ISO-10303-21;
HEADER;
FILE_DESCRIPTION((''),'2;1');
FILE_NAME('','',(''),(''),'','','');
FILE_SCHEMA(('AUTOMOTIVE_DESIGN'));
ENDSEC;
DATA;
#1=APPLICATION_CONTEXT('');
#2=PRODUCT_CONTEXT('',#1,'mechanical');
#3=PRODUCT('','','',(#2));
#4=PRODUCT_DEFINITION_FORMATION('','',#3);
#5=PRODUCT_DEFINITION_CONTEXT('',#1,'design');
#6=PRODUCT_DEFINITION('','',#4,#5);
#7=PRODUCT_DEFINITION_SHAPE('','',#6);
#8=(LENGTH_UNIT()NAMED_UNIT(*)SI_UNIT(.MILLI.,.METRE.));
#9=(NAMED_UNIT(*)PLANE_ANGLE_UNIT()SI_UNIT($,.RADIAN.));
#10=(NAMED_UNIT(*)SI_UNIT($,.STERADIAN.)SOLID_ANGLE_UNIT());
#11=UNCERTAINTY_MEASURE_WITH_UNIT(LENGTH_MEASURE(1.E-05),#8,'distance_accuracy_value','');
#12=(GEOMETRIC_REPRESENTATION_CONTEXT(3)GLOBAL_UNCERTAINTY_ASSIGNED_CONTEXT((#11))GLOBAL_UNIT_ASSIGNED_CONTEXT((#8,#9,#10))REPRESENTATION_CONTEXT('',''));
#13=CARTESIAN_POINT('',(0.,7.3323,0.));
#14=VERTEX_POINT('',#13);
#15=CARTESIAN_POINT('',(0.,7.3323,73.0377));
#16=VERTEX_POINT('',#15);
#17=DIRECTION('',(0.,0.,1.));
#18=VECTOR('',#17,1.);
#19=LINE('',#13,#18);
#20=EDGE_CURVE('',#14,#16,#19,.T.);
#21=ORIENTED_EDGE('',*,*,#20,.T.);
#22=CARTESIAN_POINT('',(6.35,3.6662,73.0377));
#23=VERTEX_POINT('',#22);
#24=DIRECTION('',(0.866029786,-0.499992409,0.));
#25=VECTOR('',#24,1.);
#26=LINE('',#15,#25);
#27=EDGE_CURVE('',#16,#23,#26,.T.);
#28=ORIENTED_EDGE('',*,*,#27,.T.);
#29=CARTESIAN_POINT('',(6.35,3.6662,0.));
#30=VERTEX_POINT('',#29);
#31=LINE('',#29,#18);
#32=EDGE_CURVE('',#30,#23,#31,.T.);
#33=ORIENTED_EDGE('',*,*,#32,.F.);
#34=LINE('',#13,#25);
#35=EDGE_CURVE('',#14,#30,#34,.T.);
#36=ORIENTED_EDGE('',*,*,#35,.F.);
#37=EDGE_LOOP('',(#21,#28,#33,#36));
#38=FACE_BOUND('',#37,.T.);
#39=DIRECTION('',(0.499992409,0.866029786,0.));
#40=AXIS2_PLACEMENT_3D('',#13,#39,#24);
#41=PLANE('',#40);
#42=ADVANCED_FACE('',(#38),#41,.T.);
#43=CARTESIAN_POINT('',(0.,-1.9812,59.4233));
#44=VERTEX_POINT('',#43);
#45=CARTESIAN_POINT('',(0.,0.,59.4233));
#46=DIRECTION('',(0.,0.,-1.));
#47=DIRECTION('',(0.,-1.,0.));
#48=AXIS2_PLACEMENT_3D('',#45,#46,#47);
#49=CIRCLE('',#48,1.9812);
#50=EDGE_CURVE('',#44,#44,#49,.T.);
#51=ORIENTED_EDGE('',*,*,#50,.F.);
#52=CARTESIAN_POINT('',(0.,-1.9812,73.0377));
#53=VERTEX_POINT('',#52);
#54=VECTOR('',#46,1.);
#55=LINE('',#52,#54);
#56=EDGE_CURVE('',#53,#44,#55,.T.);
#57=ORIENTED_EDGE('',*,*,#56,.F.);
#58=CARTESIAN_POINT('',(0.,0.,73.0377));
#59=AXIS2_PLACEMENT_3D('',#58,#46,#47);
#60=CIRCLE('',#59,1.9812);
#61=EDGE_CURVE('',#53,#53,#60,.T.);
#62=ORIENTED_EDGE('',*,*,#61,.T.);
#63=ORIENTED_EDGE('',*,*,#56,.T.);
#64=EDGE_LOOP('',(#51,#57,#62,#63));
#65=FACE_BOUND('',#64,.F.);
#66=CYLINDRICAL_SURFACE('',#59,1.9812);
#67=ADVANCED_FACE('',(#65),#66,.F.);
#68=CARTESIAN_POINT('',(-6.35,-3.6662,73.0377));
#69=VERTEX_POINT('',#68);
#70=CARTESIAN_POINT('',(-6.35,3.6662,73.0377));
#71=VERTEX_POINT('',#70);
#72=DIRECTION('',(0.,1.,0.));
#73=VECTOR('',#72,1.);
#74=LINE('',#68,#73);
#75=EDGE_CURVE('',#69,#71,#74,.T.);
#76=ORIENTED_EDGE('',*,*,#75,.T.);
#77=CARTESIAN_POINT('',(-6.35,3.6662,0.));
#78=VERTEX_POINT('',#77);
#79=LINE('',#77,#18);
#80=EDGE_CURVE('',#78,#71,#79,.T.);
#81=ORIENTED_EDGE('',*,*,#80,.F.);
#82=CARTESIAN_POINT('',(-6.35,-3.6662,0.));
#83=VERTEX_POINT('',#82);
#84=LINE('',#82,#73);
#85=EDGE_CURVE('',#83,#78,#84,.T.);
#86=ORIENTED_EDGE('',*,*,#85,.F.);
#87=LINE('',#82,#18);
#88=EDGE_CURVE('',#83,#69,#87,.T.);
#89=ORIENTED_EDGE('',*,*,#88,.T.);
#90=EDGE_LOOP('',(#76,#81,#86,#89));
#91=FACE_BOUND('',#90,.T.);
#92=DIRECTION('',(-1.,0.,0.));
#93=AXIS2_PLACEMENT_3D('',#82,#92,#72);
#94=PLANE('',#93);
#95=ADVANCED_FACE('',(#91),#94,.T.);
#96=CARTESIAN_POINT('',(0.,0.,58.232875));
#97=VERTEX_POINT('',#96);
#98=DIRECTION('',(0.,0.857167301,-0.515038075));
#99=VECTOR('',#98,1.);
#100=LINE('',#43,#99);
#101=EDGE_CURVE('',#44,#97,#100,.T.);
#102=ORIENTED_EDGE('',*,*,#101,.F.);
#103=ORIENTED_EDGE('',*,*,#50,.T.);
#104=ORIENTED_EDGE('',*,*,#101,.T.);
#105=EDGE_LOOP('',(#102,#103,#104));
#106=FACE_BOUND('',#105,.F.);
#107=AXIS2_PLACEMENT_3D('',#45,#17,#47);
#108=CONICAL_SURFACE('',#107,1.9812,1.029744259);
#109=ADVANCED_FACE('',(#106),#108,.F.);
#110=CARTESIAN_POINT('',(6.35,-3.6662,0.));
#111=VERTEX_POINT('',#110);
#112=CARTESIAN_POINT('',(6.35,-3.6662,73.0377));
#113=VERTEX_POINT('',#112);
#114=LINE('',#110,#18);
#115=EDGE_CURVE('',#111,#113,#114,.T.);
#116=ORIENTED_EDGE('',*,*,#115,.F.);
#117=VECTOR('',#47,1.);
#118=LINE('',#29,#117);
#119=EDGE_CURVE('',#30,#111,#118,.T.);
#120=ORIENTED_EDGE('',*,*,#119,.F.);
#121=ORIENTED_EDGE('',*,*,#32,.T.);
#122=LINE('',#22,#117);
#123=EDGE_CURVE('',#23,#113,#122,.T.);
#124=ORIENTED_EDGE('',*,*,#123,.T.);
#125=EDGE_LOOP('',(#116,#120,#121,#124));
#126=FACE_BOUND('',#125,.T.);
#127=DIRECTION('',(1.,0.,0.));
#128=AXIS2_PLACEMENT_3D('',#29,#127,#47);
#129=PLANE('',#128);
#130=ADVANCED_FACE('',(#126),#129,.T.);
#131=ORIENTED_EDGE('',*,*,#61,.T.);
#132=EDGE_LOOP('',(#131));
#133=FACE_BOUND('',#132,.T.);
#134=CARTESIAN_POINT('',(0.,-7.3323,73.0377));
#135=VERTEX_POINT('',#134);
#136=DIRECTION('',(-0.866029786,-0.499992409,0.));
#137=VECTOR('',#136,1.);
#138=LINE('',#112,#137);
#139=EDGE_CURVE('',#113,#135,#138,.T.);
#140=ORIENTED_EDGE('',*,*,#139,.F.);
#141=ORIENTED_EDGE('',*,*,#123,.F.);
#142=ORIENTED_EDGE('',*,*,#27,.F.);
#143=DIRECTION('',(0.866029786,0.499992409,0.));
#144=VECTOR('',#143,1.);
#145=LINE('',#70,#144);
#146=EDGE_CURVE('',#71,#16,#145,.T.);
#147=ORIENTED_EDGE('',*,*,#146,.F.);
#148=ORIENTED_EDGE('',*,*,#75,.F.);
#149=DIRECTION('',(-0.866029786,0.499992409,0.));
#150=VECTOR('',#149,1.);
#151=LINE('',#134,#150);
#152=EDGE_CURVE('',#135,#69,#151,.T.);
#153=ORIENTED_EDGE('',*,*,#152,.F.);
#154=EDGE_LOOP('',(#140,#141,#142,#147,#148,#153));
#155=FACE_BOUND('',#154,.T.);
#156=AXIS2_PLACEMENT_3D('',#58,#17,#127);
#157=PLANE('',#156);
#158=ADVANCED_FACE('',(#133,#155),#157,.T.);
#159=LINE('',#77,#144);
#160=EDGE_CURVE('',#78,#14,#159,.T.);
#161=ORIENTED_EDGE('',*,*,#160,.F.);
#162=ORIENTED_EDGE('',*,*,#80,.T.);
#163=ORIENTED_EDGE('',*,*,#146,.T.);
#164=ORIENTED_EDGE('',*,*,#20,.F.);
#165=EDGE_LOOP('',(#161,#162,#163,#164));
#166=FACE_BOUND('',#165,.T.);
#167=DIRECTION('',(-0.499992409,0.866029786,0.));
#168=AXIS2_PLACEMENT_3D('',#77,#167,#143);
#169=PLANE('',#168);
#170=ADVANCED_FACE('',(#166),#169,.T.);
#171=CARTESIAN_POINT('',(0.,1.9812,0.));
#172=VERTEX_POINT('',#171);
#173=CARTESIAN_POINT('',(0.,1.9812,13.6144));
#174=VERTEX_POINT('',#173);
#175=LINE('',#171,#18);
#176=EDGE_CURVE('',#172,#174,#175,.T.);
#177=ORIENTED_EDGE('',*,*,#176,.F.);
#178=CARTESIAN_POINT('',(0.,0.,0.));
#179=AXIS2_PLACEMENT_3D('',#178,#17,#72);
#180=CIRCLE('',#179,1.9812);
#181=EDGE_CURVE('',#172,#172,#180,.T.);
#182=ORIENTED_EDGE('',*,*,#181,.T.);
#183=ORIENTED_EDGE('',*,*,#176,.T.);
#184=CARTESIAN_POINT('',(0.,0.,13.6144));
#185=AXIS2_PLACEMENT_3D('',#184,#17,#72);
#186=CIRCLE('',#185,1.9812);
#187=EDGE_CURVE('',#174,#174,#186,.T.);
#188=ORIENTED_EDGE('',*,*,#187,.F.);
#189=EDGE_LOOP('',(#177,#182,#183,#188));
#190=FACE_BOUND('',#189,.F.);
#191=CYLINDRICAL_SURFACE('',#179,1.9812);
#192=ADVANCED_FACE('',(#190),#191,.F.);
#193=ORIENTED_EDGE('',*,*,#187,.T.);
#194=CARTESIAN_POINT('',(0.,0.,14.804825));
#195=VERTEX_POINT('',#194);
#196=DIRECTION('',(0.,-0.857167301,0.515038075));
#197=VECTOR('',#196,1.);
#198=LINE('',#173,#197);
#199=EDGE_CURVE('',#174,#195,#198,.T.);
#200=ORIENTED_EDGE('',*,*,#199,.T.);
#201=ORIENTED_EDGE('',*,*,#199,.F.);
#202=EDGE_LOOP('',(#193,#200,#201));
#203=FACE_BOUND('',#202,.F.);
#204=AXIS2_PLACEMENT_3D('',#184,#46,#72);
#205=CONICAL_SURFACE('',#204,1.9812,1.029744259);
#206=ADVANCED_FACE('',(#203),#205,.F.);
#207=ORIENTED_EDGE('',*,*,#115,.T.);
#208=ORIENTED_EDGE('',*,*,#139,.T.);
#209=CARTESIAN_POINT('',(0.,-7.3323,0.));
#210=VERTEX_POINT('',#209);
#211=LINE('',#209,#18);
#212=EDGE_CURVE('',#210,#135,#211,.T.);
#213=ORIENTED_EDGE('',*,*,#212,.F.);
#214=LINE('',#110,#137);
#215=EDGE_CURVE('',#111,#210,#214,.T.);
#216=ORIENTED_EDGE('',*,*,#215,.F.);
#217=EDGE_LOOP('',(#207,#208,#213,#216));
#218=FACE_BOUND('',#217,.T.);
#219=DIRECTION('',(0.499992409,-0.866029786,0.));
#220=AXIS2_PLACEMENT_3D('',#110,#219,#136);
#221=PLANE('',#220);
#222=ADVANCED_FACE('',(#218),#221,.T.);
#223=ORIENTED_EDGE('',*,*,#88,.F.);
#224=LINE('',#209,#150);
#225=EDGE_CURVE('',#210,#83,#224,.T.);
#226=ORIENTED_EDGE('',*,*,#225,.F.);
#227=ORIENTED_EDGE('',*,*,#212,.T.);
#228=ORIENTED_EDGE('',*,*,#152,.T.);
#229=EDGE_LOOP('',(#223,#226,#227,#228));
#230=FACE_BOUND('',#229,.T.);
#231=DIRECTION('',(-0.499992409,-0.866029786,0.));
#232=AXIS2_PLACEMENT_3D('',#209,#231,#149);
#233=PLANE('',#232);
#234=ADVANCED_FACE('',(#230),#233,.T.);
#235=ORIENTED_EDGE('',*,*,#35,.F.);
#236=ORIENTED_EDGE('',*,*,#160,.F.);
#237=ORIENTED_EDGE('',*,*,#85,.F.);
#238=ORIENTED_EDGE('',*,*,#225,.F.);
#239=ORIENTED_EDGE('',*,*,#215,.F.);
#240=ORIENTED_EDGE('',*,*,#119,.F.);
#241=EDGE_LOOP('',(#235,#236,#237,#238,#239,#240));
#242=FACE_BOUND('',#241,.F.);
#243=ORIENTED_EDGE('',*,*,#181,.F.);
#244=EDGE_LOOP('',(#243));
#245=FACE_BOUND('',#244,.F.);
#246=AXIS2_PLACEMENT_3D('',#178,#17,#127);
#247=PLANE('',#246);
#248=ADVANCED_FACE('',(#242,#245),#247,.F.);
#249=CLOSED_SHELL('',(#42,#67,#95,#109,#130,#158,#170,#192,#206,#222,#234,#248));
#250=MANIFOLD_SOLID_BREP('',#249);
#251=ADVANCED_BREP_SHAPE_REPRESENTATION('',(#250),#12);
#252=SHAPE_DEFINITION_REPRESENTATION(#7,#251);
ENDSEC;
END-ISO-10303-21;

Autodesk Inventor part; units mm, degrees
ref_plane "YZ Plane" through (0, 0, 0) normal (1, 0, 0) x (0, 1, 0)
ref_plane "XZ Plane" through (0, 0, 0) normal (0, 1, 0) x (-1, 0, 0)
ref_plane "XY Plane" through (0, 0, 0) normal (0, 0, 1) x (1, 0, 0)
sketch "Sketch1" plane through (0, 0, 0) normal (0, 0, 1) x (1, 0, 0)
  line L0 (-6.35, -3.6662) -> (-6.35, 3.6662)
  line L1 (-6.35, 3.6662) -> (0, 7.3323)
  line L2 (0, 7.3323) -> (6.35, 3.6662)
  line L3 (6.35, 3.6662) -> (6.35, -3.6662)
  line L4 (6.35, -3.6662) -> (0, -7.3323)
  line L5 (0, -7.3323) -> (-6.35, -3.6662)
  point P0 (0, 0)
  point P1 (0, 0)
  dimension "d0" = 12.7
extrude "Extrusion1" add sketch "Sketch1" along normal blind 73.0377
sketch "Sketch2" plane through (0, 0, 73.0377) normal (0, 0, 1) x (1, 0, 0)
  point P0 (0, 0)
  point P1 (0, 0)
hole "Hole1" at (0, 0, 73.0377) direction (0, 0, -1) diameter 3.9624 depth 13.6144 tip angle 118 thread size "10-32 UNF" class "2B" standard "ANSI Unified Screw Threads"
sketch "Sketch3" plane through (0, 0, 0) normal (0, 0, -1) x (-1, 0, 0)
  circle A0 centre (0, 0) radius 1.9812 projected
hole "Hole2" at (0, 0, 0) direction (0, 0, 1) diameter 3.9624 depth 13.6144 tip angle 118 thread size "10-32 UNF" class "2B" standard "ANSI Unified Screw Threads"
properties part number "STOCK,HEX,SHAFT,TURRET,DRIVE" material "Aluminum 6061"
